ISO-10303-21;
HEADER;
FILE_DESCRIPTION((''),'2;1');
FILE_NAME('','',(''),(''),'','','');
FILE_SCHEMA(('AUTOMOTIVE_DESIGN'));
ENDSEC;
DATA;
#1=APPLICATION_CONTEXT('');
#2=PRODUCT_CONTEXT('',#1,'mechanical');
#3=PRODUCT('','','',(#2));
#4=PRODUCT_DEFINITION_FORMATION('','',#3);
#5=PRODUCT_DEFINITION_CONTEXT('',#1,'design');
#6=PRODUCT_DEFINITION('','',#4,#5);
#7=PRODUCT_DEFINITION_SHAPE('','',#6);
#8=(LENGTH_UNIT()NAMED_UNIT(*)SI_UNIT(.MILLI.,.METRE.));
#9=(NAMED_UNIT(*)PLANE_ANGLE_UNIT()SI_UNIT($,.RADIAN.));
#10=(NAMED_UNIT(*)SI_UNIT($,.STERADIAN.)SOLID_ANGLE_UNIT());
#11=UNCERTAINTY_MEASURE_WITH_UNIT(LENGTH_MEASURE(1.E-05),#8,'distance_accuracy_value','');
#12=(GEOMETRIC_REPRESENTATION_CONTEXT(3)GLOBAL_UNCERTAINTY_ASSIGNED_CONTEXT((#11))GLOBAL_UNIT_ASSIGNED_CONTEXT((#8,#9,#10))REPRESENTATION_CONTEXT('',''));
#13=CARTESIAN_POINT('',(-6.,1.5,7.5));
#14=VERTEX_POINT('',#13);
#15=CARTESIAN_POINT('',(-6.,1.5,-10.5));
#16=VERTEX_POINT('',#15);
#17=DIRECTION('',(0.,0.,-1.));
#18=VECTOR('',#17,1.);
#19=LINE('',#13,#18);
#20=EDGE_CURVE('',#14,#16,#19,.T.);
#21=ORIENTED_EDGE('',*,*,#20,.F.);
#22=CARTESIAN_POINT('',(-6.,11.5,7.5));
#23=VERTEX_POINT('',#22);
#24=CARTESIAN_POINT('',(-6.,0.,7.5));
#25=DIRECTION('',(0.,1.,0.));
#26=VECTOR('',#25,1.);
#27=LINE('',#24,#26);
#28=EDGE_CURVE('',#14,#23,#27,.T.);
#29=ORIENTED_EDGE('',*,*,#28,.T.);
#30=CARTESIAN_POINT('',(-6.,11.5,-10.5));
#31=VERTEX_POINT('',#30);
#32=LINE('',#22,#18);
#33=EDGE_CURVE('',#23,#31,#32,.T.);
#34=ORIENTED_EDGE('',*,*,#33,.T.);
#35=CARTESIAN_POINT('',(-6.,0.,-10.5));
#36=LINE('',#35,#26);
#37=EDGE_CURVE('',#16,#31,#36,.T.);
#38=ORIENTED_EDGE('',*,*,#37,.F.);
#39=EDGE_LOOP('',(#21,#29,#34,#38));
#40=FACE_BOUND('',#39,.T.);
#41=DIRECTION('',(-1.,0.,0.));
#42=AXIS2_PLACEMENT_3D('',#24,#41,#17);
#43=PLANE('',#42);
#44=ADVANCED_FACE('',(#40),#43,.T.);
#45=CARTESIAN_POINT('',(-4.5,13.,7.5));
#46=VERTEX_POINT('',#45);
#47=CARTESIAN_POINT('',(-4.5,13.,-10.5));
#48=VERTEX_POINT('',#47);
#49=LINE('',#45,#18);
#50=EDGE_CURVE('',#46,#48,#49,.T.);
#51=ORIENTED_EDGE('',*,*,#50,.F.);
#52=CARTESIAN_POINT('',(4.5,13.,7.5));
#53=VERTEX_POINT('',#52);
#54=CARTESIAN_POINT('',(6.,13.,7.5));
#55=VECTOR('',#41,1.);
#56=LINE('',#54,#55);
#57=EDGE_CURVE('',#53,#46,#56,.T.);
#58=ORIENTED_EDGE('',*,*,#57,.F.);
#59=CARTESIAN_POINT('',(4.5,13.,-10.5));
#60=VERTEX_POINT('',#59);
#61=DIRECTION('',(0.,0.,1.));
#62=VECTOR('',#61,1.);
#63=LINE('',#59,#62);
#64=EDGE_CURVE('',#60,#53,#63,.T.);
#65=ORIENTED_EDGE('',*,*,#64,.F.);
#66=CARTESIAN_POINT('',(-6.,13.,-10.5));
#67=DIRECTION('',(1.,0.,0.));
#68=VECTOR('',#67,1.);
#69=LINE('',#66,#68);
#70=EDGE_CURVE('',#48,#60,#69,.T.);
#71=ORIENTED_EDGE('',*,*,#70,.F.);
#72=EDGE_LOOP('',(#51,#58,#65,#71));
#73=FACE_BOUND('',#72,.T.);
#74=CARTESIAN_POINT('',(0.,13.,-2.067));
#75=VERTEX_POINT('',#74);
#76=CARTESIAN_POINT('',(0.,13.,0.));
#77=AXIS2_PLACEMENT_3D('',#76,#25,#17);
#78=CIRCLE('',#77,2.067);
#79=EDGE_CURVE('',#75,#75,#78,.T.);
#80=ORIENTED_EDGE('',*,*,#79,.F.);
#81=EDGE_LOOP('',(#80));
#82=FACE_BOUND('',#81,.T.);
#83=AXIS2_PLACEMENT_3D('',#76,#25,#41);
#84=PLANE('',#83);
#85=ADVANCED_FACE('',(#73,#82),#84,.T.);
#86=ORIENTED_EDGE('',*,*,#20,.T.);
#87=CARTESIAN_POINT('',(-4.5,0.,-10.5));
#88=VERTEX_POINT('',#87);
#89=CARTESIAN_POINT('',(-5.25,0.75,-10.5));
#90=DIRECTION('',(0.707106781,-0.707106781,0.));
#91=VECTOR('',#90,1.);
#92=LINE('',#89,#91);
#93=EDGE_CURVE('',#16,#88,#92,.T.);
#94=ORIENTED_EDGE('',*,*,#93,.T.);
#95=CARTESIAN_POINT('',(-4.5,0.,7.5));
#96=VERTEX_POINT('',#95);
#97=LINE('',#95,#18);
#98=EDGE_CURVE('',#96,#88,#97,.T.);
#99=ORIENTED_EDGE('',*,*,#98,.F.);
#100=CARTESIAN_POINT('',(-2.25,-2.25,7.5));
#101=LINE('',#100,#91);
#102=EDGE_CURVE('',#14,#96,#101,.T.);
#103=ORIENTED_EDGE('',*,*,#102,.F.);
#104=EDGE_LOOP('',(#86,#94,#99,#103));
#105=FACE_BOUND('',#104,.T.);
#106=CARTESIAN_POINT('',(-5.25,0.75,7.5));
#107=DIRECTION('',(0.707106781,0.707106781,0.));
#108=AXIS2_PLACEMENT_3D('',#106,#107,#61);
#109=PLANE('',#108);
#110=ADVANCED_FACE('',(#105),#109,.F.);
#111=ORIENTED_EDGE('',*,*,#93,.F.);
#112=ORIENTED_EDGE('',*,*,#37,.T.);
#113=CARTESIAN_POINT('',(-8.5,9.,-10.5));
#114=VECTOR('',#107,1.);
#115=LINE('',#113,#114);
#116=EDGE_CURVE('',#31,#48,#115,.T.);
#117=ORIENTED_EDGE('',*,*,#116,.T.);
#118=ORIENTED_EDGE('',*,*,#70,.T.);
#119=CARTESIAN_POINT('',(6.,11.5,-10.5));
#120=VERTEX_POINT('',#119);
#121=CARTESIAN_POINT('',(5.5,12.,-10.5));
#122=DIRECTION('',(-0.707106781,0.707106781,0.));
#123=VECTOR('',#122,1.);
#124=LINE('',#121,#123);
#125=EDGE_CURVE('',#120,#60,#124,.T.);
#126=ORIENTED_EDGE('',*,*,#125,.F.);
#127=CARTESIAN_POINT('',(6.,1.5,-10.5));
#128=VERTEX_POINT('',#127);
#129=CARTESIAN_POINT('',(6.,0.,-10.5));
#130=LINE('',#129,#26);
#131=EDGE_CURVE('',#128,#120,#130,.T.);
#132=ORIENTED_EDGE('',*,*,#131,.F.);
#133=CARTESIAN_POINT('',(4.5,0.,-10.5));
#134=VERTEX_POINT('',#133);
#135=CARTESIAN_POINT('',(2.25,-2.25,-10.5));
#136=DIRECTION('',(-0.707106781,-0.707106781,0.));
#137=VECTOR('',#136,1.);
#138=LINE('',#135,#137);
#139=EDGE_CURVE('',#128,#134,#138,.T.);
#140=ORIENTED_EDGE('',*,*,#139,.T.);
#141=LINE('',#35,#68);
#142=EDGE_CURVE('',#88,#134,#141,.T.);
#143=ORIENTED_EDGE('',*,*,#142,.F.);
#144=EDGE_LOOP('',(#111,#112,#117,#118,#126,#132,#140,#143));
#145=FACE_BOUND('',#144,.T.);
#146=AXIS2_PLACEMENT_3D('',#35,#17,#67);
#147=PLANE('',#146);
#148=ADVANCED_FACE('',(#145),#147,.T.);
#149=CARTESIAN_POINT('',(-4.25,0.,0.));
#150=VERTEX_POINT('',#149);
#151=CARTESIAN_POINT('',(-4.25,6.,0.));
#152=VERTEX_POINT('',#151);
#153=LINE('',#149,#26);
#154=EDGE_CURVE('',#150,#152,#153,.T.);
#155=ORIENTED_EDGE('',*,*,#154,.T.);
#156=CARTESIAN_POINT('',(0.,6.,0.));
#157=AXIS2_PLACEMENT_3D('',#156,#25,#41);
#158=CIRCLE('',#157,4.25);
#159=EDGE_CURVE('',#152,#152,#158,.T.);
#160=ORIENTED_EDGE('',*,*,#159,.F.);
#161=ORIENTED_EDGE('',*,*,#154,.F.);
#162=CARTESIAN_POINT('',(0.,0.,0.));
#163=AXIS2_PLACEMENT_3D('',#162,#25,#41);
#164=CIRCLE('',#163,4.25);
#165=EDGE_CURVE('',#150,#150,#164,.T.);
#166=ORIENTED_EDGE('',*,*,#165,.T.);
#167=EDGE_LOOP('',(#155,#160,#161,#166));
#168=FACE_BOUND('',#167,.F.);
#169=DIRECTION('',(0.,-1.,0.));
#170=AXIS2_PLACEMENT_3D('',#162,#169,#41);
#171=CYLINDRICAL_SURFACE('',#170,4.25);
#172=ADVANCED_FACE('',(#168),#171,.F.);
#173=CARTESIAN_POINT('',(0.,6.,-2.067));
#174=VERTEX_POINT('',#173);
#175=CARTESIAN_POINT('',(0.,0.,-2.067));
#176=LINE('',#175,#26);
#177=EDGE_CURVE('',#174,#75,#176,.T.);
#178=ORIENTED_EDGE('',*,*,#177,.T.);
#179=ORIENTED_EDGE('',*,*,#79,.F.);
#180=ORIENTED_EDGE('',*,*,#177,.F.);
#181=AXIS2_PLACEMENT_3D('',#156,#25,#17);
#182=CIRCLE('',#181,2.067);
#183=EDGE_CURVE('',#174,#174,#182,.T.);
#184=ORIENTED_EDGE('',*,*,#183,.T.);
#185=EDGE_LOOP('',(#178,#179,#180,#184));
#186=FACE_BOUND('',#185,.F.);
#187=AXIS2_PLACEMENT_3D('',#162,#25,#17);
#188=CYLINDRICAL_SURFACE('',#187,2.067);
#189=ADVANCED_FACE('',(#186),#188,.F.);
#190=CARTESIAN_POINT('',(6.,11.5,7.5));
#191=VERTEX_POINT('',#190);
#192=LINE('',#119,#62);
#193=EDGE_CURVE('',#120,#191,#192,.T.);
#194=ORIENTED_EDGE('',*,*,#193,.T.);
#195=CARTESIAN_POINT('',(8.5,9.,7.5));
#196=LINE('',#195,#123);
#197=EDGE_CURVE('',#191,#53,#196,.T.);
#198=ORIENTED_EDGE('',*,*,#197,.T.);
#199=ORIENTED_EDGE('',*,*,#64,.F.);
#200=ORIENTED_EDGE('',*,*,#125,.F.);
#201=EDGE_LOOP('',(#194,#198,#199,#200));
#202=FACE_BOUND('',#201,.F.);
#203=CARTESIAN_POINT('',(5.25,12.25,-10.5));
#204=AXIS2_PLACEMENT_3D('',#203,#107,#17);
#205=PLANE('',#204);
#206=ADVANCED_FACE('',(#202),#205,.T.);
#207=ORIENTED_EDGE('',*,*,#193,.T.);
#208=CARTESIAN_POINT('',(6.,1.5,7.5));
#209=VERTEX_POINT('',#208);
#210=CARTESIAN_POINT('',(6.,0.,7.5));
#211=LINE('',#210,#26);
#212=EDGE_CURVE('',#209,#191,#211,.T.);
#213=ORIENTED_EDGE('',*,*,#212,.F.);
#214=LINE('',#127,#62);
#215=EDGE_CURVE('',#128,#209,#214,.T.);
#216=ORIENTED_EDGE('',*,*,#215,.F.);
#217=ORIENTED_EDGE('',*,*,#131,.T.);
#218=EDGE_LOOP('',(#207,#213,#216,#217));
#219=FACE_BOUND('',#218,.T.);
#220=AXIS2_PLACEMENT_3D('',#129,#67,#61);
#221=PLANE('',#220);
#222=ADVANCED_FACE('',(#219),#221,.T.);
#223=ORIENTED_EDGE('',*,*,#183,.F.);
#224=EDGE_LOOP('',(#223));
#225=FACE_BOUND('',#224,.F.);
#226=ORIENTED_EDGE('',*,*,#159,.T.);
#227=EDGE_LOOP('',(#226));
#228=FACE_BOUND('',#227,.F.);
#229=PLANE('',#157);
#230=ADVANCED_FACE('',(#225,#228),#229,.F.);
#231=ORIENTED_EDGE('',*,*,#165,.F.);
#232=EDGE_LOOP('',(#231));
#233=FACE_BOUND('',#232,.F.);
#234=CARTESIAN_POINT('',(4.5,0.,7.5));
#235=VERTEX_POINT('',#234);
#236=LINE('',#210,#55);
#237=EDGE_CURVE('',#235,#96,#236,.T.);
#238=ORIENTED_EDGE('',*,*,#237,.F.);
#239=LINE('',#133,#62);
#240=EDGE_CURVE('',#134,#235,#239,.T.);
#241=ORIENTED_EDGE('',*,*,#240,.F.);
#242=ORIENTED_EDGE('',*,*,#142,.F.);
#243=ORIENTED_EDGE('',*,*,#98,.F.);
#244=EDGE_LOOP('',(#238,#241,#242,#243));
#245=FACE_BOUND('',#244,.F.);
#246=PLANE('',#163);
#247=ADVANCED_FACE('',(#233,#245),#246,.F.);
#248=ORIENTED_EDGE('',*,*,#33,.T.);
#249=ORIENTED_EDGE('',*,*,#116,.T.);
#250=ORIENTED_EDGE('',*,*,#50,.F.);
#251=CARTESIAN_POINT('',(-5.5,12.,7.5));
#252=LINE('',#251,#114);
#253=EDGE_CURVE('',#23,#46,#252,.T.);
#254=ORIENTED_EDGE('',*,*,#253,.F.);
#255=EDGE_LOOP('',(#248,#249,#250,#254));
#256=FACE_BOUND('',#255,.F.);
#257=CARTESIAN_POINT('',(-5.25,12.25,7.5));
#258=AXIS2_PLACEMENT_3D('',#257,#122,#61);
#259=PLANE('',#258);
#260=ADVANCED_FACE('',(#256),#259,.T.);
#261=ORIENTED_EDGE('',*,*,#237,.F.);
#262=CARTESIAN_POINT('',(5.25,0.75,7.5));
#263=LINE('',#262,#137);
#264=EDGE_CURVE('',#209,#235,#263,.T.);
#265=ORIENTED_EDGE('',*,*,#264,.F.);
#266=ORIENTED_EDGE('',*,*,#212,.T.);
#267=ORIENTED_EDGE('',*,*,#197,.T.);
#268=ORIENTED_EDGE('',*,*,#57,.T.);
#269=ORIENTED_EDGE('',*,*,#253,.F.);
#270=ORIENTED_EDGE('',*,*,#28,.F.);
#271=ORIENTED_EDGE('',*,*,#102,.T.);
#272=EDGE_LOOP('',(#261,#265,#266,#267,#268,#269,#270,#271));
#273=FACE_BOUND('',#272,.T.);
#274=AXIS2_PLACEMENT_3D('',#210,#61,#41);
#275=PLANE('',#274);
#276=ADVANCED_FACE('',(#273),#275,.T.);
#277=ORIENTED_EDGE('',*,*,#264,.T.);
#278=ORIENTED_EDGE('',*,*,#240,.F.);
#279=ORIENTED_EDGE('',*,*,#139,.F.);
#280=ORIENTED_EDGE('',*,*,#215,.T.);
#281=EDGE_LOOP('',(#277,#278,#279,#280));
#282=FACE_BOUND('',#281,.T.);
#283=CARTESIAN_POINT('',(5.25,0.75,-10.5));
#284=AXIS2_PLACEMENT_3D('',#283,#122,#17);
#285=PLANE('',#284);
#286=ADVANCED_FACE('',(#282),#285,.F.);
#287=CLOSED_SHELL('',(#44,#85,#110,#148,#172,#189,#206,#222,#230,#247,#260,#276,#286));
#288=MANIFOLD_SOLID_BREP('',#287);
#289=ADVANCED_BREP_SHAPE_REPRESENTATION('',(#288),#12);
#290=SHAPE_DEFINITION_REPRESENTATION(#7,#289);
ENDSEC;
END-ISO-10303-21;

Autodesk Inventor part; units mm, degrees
ref_plane "YZ Plane" through (0, 0, 0) normal (1, 0, 0) x (0, 1, 0)
ref_plane "XZ Plane" through (0, 0, 0) normal (0, 1, 0) x (-1, 0, 0)
ref_plane "XY Plane" through (0, 0, 0) normal (0, 0, 1) x (1, 0, 0)
sketch "Sketch1" plane through (0, 0, 0) normal (0, 1, 0) x (-1, 0, 0)
  line L0 (-6, 7.5) -> (6, 7.5)
  line L1 (6, 7.5) -> (6, -10.5)
  line L2 (6, -10.5) -> (-6, -10.5)
  line L3 (-6, -10.5) -> (-6, 7.5)
  circle A0 centre (0, 0) radius 4.25
  point P0 (0, 7.5)
  dimension "d0" = 12
  dimension "d1" = 18
  dimension "d2" = 8.5
  dimension "d3" = 7.5
extrude "Extrusion1" add sketch "Sketch1" along normal blind 13 contours L0 L1 L2 L3 | A0
extrude "Extrusion2" cut sketch "Sketch1" along normal blind 6 contours A0
chamfer "Chamfer2" distance 1.5 angle 45 4 edges at (6, 13, -1.5) (-6, 13, -1.5) (-6, 0, -1.5) (6, 0, -1.5)
hole "Hole3" at (0, 0, 0) direction (0, 1, 0) diameter 4.134 depth 13 thread size "M5x0.8" class "6H" standard "ISO Metric profile"
properties part number "ConTruot"
